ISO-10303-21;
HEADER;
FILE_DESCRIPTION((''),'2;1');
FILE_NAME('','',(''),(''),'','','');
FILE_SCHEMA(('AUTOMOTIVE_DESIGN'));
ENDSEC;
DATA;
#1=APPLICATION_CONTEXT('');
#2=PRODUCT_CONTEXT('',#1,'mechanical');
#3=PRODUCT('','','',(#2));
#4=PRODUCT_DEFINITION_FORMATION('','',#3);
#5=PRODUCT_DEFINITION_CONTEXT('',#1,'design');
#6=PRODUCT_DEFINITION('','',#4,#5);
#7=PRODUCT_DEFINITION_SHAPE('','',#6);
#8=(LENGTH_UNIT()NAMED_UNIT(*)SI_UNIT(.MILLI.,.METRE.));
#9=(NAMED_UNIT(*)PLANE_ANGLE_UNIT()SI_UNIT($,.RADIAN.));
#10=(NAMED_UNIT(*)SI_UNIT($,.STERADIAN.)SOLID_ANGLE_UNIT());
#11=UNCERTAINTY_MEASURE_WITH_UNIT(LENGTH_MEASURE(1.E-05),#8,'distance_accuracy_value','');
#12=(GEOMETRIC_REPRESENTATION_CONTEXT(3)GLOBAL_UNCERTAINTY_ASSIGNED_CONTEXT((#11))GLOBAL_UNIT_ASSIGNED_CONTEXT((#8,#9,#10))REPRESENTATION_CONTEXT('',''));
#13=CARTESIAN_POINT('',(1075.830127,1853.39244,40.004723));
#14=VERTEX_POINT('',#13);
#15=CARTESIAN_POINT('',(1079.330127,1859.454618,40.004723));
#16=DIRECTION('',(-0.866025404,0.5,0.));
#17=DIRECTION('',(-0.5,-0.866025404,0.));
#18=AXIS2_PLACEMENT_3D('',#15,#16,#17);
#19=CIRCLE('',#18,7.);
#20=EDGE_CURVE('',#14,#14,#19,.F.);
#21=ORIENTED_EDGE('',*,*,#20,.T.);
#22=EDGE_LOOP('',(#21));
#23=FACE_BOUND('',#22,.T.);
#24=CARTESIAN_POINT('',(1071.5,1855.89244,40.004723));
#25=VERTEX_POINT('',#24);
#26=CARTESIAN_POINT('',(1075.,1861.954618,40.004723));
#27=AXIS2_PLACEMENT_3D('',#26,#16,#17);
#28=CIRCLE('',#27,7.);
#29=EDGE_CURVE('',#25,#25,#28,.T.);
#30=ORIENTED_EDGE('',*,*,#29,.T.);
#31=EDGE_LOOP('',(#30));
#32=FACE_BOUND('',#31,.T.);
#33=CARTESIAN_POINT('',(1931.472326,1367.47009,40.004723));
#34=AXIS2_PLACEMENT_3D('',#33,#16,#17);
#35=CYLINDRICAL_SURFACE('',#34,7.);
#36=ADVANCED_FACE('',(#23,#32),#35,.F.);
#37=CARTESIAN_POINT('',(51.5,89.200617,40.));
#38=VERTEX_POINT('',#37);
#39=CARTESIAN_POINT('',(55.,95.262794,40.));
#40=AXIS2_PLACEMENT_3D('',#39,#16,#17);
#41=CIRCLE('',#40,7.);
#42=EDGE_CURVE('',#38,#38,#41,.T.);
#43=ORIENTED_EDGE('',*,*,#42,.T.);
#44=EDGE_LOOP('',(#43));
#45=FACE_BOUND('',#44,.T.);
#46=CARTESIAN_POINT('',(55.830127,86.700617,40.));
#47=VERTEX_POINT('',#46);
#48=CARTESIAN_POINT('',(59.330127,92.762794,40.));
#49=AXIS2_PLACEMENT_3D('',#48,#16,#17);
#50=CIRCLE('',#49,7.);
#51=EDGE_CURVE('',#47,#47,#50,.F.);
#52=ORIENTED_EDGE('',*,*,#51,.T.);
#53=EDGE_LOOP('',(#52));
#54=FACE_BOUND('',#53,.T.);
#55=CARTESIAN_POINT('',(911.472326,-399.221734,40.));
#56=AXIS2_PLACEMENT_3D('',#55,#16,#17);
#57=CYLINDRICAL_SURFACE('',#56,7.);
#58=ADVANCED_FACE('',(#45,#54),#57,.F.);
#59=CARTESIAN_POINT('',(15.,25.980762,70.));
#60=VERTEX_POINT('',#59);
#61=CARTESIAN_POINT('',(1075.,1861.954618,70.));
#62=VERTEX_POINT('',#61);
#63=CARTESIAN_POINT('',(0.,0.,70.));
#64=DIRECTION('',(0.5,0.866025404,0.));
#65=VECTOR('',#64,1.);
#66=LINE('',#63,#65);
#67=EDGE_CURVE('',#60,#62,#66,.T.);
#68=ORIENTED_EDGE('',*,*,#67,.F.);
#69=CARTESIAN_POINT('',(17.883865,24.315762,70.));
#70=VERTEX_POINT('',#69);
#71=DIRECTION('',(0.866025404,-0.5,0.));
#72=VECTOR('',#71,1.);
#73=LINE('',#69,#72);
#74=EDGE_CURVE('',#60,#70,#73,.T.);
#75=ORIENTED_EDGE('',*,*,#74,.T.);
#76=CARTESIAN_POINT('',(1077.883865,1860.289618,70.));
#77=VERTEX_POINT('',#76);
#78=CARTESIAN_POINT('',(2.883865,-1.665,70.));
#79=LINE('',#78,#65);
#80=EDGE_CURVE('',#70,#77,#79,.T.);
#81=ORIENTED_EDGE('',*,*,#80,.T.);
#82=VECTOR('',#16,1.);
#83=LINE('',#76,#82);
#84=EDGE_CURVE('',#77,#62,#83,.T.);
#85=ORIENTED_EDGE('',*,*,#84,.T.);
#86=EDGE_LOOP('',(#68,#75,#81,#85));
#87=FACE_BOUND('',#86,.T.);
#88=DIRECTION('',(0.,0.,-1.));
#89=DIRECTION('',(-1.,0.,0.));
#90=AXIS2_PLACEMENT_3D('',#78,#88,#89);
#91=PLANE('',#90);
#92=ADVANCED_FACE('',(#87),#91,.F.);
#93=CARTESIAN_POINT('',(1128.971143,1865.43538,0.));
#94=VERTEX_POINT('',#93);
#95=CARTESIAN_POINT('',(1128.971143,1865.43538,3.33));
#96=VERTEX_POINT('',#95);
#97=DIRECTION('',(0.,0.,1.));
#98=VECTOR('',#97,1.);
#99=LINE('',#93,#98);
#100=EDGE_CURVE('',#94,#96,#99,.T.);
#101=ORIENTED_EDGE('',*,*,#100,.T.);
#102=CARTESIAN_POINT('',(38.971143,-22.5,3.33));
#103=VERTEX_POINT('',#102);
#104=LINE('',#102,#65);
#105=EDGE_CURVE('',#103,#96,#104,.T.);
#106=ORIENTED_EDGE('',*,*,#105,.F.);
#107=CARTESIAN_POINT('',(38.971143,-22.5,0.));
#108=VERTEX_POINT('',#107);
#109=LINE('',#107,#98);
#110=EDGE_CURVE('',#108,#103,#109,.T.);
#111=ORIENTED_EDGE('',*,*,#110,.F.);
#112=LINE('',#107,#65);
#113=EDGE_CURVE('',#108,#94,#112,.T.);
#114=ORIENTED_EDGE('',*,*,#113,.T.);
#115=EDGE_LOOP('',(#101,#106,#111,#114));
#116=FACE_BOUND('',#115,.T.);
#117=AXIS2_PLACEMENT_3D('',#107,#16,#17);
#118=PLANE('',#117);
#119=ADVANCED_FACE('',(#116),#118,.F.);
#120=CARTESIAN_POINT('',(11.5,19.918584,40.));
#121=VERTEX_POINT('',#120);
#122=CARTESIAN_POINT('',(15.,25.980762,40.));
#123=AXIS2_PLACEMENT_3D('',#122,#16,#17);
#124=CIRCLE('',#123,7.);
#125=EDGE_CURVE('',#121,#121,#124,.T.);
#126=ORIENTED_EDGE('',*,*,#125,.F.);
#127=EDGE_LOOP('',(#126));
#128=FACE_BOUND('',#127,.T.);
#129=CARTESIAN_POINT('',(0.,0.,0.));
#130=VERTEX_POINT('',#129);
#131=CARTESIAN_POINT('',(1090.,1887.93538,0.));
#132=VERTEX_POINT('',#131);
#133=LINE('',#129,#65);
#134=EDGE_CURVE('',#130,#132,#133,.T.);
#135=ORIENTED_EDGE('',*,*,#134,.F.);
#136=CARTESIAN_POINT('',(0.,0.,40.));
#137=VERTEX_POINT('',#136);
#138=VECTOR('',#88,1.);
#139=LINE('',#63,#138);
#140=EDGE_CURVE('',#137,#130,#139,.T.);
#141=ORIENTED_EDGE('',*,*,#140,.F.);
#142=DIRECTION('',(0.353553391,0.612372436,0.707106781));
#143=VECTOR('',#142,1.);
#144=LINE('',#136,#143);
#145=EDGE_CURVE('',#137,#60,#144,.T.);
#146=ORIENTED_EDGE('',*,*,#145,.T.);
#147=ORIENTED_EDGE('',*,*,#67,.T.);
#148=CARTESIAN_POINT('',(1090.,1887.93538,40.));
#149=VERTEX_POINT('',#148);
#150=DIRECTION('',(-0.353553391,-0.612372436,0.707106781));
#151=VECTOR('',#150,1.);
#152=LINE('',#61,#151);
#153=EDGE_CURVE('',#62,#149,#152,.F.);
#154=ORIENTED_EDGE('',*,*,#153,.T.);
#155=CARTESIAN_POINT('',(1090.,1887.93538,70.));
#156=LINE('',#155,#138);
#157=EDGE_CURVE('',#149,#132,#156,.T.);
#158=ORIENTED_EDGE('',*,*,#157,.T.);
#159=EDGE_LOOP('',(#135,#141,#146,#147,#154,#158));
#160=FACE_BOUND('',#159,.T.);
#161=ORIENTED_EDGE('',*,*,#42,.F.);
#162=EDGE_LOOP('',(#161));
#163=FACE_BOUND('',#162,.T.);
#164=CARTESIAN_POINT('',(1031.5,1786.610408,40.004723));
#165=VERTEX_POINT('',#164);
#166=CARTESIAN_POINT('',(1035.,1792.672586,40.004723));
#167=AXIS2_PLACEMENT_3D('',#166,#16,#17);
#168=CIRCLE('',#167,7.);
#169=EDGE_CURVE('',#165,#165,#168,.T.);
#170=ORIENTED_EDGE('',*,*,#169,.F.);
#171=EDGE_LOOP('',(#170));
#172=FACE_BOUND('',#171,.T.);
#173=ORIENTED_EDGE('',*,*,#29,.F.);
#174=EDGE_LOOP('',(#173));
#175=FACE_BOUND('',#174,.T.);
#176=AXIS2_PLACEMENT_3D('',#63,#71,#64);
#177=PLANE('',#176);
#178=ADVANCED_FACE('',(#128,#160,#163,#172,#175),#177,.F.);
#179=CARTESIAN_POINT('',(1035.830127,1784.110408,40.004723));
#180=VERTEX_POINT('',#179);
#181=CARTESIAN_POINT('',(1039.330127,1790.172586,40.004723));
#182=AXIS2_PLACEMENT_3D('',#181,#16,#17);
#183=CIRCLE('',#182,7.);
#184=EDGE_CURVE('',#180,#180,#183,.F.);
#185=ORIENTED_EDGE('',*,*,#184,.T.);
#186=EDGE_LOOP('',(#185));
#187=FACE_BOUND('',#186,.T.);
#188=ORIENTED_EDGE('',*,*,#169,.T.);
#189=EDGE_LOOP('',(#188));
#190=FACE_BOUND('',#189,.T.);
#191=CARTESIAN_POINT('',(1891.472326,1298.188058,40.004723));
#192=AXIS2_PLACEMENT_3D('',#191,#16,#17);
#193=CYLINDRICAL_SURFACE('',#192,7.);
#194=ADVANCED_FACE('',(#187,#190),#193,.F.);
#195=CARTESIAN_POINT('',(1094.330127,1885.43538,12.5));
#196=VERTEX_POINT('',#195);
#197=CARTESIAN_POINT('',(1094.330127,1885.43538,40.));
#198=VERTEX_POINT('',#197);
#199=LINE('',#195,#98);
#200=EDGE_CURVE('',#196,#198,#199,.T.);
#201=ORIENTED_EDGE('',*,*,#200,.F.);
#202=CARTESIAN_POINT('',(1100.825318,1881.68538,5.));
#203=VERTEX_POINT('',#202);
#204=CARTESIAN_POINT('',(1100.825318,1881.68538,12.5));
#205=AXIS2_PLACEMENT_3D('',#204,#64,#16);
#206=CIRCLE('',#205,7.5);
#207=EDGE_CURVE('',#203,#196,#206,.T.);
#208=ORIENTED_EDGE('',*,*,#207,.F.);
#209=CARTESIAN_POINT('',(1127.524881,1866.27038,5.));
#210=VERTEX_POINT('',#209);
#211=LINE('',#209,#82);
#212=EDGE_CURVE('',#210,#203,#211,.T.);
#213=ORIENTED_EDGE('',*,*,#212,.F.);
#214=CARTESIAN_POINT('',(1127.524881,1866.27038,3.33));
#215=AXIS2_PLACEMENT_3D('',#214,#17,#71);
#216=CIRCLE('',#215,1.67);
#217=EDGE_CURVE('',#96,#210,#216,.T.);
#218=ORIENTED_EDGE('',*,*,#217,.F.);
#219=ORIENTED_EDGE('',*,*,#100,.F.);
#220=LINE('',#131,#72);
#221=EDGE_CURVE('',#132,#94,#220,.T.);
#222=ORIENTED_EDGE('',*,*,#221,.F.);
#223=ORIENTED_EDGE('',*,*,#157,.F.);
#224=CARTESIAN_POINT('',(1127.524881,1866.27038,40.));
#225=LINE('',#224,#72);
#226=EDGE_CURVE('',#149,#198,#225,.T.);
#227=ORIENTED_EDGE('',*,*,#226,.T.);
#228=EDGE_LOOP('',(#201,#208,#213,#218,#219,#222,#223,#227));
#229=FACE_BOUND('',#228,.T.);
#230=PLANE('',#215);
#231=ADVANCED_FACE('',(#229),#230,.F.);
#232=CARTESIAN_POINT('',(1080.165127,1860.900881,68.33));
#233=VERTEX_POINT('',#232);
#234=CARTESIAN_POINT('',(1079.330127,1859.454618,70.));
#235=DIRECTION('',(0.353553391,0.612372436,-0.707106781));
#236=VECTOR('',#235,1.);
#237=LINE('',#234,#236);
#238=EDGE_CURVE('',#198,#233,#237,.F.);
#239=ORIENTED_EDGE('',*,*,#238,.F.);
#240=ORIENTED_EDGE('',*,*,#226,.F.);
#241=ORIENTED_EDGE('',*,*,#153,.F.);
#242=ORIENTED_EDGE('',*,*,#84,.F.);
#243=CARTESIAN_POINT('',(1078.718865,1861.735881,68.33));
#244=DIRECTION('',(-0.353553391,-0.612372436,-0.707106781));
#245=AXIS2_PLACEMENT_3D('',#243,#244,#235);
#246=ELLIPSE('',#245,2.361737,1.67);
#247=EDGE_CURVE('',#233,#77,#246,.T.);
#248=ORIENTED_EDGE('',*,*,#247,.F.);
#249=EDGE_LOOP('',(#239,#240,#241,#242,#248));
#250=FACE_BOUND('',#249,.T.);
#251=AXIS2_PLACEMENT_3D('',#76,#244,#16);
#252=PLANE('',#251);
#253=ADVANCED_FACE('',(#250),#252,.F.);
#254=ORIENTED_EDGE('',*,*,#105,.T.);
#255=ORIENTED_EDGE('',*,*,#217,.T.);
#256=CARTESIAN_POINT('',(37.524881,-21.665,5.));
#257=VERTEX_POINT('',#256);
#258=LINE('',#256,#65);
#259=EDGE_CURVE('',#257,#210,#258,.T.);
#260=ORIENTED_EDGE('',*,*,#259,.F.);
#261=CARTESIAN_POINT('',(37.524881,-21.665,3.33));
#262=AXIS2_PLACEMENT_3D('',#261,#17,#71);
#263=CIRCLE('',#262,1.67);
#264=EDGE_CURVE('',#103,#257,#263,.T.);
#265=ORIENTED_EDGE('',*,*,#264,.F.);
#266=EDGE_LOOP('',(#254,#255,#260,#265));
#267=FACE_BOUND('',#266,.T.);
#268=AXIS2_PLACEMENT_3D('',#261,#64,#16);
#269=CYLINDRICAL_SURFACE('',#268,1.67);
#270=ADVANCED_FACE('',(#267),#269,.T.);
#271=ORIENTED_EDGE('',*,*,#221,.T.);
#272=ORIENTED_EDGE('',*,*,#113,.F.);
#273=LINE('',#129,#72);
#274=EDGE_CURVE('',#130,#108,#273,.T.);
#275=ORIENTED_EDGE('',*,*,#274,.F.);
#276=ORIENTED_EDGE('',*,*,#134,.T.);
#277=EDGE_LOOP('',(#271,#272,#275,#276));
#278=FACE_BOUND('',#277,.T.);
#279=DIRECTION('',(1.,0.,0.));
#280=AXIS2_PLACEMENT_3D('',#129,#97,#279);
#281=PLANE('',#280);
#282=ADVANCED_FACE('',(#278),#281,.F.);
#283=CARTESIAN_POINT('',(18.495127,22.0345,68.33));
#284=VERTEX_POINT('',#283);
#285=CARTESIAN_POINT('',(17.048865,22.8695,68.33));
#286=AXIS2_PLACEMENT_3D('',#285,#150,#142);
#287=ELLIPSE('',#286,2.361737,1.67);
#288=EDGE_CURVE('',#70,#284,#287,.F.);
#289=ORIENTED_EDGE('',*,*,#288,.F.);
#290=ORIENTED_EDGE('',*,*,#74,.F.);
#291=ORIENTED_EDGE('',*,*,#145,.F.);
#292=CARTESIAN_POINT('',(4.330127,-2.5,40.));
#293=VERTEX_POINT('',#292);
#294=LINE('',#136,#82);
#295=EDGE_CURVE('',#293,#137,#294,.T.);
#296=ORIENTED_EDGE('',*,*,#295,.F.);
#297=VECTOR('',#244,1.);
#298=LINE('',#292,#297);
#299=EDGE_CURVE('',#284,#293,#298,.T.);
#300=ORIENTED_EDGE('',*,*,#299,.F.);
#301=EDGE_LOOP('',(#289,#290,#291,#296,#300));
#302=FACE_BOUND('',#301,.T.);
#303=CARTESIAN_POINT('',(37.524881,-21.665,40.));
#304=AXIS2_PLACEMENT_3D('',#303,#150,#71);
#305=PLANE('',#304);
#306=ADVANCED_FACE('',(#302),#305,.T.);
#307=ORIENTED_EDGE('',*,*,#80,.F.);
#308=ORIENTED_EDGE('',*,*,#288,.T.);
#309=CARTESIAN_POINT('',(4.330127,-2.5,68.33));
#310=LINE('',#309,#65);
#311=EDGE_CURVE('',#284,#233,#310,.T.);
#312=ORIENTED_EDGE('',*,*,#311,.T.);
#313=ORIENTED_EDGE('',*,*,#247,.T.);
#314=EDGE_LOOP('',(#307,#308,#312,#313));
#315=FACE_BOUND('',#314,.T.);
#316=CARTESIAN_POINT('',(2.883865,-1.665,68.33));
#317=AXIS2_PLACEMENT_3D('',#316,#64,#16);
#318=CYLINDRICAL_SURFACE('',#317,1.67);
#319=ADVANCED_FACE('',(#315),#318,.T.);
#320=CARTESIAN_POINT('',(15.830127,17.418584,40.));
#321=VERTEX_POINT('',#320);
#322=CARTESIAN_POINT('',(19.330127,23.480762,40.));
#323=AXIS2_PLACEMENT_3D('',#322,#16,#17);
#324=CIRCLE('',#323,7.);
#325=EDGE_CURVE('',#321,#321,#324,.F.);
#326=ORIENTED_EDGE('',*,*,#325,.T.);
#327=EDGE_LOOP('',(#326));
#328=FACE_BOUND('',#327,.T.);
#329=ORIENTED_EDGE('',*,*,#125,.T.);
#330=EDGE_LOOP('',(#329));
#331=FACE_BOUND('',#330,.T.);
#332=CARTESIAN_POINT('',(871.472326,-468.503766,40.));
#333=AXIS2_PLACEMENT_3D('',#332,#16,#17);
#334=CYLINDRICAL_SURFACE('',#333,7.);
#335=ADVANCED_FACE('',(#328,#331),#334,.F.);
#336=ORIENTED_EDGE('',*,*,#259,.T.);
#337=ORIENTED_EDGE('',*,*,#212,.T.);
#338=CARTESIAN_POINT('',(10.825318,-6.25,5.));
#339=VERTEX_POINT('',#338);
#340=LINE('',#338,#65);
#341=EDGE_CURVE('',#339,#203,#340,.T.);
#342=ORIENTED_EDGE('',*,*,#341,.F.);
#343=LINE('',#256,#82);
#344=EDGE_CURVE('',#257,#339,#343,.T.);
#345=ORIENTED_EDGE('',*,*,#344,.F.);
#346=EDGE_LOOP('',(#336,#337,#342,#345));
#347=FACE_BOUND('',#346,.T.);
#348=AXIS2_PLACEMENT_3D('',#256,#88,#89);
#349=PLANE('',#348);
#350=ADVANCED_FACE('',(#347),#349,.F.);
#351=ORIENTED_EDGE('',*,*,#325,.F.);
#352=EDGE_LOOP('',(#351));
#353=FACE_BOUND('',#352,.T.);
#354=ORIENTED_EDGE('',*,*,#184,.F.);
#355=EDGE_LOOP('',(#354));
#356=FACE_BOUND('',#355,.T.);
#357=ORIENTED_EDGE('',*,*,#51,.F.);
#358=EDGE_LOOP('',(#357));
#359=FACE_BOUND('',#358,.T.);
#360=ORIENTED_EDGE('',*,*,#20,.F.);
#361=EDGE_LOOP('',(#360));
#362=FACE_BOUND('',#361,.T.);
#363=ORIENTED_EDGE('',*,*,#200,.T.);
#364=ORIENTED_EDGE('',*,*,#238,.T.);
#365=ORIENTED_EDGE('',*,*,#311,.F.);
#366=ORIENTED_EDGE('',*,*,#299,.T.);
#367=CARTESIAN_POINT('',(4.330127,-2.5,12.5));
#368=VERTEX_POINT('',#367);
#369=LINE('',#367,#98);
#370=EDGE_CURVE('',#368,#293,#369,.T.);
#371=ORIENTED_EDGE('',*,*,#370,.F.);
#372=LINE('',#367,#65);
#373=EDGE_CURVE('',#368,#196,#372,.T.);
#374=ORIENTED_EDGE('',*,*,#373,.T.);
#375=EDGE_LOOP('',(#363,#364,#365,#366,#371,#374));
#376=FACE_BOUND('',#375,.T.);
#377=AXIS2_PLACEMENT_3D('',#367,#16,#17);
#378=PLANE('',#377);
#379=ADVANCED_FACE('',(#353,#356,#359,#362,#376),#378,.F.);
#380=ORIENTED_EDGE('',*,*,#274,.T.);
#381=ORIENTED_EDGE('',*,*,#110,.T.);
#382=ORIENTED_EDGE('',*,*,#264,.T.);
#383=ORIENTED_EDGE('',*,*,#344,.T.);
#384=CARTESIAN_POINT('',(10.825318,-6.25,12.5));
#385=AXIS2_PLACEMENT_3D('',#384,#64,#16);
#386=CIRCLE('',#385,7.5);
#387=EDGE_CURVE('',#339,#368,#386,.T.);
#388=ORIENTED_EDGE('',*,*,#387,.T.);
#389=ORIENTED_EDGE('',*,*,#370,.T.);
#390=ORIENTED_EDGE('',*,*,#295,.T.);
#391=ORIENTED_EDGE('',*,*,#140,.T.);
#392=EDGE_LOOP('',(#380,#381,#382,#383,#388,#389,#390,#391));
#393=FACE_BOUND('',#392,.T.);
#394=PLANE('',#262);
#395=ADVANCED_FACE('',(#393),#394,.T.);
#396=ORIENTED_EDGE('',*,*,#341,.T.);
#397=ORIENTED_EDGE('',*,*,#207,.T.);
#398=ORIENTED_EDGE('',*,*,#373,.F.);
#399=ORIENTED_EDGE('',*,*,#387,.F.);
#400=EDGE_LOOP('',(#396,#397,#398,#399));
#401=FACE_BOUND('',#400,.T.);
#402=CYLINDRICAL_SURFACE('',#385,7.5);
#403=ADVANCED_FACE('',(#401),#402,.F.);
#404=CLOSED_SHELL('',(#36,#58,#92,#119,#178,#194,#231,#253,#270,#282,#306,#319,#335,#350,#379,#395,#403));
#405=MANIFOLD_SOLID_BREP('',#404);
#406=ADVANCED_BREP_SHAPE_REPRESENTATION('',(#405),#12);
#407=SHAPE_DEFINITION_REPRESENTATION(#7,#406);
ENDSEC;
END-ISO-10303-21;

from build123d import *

# Parameters (mm, degrees)
F_70X45X5_1_DEPTH   = 2180
CUT_EXTRUDE_1_REACH = 2202.858
SKETCH_12_R         = 7
CUT_EXTRUDE_2_REACH = 2202.858
SKETCH_13_R         = 7
CHAMFER_1_SIZE      = 30
CHAMFER_2_SIZE      = 30


with BuildPart() as part:
    # 草图11 → 不等边角钢 70X45X5(1) (new body)
    with BuildSketch(Plane(origin=(1090, 1887.93538025, 0), x_dir=(0.86602540378444, -0.4999999999999978, 0), z_dir=(-0.4999999999999978, -0.86602540378444, 0))):
        with BuildLine():
            Line((0, 70), (0, 0))
            Line((0, 0), (45, 0))
            Line((45, 0), (45, 3.33))
            ThreePointArc((45, 3.33), (44.510868325, 4.510868325), (43.33, 5))
            Line((43.33, 5), (12.5, 5))
            ThreePointArc((12.5, 5), (7.196699141, 7.196699141), (5, 12.5))
            Line((5, 12.5), (5, 68.33))
            ThreePointArc((5, 68.33), (4.510868325, 69.510868325), (3.33, 70))
            Line((3.33, 70), (0, 70))
        make_face()
    extrude(amount=F_70X45X5_1_DEPTH)

    # 草图12 → 切除-拉伸1 (cut, up to next)
    with BuildSketch(Plane(origin=(0, 0, 0), x_dir=(0, 0, 1), z_dir=(-0.86602540378444, 0.49999999999999784, 0)), mode=Mode.PRIVATE) as cut_extrude_1_sk1:
        with Locations(Location((40, 30, 0), (0, 0, 270))):
            Circle(SKETCH_12_R)
    cut_extrude_1_tool1 = extrude(cut_extrude_1_sk1.sketch, amount=-CUT_EXTRUDE_1_REACH, mode=Mode.PRIVATE) & part.part
    # 草图12 → 切除-拉伸1 (cut, up to next)
    with BuildSketch(Plane(origin=(0, 0, 0), x_dir=(0, 0, 1), z_dir=(-0.86602540378444, 0.49999999999999784, 0)), mode=Mode.PRIVATE) as cut_extrude_1_sk2:
        with Locations(Location((40, 110, 0), (0, 0, 270))):
            Circle(SKETCH_12_R)
    cut_extrude_1_tool2 = extrude(cut_extrude_1_sk2.sketch, amount=-CUT_EXTRUDE_1_REACH, mode=Mode.PRIVATE) & part.part
    add(cut_extrude_1_tool1.solids().sort_by_distance((15, 25.980762, 40))[0], mode=Mode.SUBTRACT)
    add(cut_extrude_1_tool2.solids().sort_by_distance((55, 95.262794, 40))[0], mode=Mode.SUBTRACT)

    # 草图13 → 切除-拉伸2 (cut, up to next)
    with BuildSketch(Plane(origin=(0, 0, 0), x_dir=(0, 0, 1), z_dir=(-0.86602540378444, 0.49999999999999784, 0)), mode=Mode.PRIVATE) as cut_extrude_2_sk1:
        with Locations(Location((40.004723234, 2070, 0), (0, 0, 270))):
            Circle(SKETCH_13_R)
    cut_extrude_2_tool1 = extrude(cut_extrude_2_sk1.sketch, amount=-CUT_EXTRUDE_2_REACH, mode=Mode.PRIVATE) & part.part
    # 草图13 → 切除-拉伸2 (cut, up to next)
    with BuildSketch(Plane(origin=(0, 0, 0), x_dir=(0, 0, 1), z_dir=(-0.86602540378444, 0.49999999999999784, 0)), mode=Mode.PRIVATE) as cut_extrude_2_sk2:
        with Locations(Location((40.004723234, 2150, 0), (0, 0, 270))):
            Circle(SKETCH_13_R)
    cut_extrude_2_tool2 = extrude(cut_extrude_2_sk2.sketch, amount=-CUT_EXTRUDE_2_REACH, mode=Mode.PRIVATE) & part.part
    add(cut_extrude_2_tool1.solids().sort_by_distance((1035, 1792.672586, 40.004723))[0], mode=Mode.SUBTRACT)
    add(cut_extrude_2_tool2.solids().sort_by_distance((1075, 1861.954618, 40.004723))[0], mode=Mode.SUBTRACT)

    # 倒角1
    # the kernel refuses this chamfer: 30 mm, written as the material it takes off along each edge
    with BuildSketch(Plane(origin=(1159.698148536, 1847.695135431, 70), x_dir=(-0.4998109584556461, -0.8656979742248816, 0.027495876610586955), z_dir=(-0.86602540378444, 0.4999999999999978, 0))) as chamfer_1_piece_1:
        Polygon((CHAMFER_1_SIZE * 0.999621916911, -CHAMFER_1_SIZE * 0.0274958766106), (-CHAMFER_1_SIZE * 0.0274958766106, -CHAMFER_1_SIZE * 0.999621916911), (0, 0), align=None)
    extrude(amount=157.630979278, mode=Mode.SUBTRACT)

    # 倒角2
    # the kernel refuses this chamfer: 30 mm, written as the material it takes off along each edge
    with BuildSketch(Plane(origin=(69.698148536, -40.240244819, 70), x_dir=(-0.013747938305293052, -0.02381212764409008, -0.9996219169112966), z_dir=(-0.86602540378444, 0.4999999999999978, 0))) as chamfer_2_piece_1:
        Polygon((CHAMFER_2_SIZE * 0.999621916911, -CHAMFER_2_SIZE * 0.0274958766106), (-CHAMFER_2_SIZE * 0.0274958766106, -CHAMFER_2_SIZE * 0.999621916911), (0, 0), align=None)
    extrude(amount=157.630979278, mode=Mode.SUBTRACT)


solid = part.part
